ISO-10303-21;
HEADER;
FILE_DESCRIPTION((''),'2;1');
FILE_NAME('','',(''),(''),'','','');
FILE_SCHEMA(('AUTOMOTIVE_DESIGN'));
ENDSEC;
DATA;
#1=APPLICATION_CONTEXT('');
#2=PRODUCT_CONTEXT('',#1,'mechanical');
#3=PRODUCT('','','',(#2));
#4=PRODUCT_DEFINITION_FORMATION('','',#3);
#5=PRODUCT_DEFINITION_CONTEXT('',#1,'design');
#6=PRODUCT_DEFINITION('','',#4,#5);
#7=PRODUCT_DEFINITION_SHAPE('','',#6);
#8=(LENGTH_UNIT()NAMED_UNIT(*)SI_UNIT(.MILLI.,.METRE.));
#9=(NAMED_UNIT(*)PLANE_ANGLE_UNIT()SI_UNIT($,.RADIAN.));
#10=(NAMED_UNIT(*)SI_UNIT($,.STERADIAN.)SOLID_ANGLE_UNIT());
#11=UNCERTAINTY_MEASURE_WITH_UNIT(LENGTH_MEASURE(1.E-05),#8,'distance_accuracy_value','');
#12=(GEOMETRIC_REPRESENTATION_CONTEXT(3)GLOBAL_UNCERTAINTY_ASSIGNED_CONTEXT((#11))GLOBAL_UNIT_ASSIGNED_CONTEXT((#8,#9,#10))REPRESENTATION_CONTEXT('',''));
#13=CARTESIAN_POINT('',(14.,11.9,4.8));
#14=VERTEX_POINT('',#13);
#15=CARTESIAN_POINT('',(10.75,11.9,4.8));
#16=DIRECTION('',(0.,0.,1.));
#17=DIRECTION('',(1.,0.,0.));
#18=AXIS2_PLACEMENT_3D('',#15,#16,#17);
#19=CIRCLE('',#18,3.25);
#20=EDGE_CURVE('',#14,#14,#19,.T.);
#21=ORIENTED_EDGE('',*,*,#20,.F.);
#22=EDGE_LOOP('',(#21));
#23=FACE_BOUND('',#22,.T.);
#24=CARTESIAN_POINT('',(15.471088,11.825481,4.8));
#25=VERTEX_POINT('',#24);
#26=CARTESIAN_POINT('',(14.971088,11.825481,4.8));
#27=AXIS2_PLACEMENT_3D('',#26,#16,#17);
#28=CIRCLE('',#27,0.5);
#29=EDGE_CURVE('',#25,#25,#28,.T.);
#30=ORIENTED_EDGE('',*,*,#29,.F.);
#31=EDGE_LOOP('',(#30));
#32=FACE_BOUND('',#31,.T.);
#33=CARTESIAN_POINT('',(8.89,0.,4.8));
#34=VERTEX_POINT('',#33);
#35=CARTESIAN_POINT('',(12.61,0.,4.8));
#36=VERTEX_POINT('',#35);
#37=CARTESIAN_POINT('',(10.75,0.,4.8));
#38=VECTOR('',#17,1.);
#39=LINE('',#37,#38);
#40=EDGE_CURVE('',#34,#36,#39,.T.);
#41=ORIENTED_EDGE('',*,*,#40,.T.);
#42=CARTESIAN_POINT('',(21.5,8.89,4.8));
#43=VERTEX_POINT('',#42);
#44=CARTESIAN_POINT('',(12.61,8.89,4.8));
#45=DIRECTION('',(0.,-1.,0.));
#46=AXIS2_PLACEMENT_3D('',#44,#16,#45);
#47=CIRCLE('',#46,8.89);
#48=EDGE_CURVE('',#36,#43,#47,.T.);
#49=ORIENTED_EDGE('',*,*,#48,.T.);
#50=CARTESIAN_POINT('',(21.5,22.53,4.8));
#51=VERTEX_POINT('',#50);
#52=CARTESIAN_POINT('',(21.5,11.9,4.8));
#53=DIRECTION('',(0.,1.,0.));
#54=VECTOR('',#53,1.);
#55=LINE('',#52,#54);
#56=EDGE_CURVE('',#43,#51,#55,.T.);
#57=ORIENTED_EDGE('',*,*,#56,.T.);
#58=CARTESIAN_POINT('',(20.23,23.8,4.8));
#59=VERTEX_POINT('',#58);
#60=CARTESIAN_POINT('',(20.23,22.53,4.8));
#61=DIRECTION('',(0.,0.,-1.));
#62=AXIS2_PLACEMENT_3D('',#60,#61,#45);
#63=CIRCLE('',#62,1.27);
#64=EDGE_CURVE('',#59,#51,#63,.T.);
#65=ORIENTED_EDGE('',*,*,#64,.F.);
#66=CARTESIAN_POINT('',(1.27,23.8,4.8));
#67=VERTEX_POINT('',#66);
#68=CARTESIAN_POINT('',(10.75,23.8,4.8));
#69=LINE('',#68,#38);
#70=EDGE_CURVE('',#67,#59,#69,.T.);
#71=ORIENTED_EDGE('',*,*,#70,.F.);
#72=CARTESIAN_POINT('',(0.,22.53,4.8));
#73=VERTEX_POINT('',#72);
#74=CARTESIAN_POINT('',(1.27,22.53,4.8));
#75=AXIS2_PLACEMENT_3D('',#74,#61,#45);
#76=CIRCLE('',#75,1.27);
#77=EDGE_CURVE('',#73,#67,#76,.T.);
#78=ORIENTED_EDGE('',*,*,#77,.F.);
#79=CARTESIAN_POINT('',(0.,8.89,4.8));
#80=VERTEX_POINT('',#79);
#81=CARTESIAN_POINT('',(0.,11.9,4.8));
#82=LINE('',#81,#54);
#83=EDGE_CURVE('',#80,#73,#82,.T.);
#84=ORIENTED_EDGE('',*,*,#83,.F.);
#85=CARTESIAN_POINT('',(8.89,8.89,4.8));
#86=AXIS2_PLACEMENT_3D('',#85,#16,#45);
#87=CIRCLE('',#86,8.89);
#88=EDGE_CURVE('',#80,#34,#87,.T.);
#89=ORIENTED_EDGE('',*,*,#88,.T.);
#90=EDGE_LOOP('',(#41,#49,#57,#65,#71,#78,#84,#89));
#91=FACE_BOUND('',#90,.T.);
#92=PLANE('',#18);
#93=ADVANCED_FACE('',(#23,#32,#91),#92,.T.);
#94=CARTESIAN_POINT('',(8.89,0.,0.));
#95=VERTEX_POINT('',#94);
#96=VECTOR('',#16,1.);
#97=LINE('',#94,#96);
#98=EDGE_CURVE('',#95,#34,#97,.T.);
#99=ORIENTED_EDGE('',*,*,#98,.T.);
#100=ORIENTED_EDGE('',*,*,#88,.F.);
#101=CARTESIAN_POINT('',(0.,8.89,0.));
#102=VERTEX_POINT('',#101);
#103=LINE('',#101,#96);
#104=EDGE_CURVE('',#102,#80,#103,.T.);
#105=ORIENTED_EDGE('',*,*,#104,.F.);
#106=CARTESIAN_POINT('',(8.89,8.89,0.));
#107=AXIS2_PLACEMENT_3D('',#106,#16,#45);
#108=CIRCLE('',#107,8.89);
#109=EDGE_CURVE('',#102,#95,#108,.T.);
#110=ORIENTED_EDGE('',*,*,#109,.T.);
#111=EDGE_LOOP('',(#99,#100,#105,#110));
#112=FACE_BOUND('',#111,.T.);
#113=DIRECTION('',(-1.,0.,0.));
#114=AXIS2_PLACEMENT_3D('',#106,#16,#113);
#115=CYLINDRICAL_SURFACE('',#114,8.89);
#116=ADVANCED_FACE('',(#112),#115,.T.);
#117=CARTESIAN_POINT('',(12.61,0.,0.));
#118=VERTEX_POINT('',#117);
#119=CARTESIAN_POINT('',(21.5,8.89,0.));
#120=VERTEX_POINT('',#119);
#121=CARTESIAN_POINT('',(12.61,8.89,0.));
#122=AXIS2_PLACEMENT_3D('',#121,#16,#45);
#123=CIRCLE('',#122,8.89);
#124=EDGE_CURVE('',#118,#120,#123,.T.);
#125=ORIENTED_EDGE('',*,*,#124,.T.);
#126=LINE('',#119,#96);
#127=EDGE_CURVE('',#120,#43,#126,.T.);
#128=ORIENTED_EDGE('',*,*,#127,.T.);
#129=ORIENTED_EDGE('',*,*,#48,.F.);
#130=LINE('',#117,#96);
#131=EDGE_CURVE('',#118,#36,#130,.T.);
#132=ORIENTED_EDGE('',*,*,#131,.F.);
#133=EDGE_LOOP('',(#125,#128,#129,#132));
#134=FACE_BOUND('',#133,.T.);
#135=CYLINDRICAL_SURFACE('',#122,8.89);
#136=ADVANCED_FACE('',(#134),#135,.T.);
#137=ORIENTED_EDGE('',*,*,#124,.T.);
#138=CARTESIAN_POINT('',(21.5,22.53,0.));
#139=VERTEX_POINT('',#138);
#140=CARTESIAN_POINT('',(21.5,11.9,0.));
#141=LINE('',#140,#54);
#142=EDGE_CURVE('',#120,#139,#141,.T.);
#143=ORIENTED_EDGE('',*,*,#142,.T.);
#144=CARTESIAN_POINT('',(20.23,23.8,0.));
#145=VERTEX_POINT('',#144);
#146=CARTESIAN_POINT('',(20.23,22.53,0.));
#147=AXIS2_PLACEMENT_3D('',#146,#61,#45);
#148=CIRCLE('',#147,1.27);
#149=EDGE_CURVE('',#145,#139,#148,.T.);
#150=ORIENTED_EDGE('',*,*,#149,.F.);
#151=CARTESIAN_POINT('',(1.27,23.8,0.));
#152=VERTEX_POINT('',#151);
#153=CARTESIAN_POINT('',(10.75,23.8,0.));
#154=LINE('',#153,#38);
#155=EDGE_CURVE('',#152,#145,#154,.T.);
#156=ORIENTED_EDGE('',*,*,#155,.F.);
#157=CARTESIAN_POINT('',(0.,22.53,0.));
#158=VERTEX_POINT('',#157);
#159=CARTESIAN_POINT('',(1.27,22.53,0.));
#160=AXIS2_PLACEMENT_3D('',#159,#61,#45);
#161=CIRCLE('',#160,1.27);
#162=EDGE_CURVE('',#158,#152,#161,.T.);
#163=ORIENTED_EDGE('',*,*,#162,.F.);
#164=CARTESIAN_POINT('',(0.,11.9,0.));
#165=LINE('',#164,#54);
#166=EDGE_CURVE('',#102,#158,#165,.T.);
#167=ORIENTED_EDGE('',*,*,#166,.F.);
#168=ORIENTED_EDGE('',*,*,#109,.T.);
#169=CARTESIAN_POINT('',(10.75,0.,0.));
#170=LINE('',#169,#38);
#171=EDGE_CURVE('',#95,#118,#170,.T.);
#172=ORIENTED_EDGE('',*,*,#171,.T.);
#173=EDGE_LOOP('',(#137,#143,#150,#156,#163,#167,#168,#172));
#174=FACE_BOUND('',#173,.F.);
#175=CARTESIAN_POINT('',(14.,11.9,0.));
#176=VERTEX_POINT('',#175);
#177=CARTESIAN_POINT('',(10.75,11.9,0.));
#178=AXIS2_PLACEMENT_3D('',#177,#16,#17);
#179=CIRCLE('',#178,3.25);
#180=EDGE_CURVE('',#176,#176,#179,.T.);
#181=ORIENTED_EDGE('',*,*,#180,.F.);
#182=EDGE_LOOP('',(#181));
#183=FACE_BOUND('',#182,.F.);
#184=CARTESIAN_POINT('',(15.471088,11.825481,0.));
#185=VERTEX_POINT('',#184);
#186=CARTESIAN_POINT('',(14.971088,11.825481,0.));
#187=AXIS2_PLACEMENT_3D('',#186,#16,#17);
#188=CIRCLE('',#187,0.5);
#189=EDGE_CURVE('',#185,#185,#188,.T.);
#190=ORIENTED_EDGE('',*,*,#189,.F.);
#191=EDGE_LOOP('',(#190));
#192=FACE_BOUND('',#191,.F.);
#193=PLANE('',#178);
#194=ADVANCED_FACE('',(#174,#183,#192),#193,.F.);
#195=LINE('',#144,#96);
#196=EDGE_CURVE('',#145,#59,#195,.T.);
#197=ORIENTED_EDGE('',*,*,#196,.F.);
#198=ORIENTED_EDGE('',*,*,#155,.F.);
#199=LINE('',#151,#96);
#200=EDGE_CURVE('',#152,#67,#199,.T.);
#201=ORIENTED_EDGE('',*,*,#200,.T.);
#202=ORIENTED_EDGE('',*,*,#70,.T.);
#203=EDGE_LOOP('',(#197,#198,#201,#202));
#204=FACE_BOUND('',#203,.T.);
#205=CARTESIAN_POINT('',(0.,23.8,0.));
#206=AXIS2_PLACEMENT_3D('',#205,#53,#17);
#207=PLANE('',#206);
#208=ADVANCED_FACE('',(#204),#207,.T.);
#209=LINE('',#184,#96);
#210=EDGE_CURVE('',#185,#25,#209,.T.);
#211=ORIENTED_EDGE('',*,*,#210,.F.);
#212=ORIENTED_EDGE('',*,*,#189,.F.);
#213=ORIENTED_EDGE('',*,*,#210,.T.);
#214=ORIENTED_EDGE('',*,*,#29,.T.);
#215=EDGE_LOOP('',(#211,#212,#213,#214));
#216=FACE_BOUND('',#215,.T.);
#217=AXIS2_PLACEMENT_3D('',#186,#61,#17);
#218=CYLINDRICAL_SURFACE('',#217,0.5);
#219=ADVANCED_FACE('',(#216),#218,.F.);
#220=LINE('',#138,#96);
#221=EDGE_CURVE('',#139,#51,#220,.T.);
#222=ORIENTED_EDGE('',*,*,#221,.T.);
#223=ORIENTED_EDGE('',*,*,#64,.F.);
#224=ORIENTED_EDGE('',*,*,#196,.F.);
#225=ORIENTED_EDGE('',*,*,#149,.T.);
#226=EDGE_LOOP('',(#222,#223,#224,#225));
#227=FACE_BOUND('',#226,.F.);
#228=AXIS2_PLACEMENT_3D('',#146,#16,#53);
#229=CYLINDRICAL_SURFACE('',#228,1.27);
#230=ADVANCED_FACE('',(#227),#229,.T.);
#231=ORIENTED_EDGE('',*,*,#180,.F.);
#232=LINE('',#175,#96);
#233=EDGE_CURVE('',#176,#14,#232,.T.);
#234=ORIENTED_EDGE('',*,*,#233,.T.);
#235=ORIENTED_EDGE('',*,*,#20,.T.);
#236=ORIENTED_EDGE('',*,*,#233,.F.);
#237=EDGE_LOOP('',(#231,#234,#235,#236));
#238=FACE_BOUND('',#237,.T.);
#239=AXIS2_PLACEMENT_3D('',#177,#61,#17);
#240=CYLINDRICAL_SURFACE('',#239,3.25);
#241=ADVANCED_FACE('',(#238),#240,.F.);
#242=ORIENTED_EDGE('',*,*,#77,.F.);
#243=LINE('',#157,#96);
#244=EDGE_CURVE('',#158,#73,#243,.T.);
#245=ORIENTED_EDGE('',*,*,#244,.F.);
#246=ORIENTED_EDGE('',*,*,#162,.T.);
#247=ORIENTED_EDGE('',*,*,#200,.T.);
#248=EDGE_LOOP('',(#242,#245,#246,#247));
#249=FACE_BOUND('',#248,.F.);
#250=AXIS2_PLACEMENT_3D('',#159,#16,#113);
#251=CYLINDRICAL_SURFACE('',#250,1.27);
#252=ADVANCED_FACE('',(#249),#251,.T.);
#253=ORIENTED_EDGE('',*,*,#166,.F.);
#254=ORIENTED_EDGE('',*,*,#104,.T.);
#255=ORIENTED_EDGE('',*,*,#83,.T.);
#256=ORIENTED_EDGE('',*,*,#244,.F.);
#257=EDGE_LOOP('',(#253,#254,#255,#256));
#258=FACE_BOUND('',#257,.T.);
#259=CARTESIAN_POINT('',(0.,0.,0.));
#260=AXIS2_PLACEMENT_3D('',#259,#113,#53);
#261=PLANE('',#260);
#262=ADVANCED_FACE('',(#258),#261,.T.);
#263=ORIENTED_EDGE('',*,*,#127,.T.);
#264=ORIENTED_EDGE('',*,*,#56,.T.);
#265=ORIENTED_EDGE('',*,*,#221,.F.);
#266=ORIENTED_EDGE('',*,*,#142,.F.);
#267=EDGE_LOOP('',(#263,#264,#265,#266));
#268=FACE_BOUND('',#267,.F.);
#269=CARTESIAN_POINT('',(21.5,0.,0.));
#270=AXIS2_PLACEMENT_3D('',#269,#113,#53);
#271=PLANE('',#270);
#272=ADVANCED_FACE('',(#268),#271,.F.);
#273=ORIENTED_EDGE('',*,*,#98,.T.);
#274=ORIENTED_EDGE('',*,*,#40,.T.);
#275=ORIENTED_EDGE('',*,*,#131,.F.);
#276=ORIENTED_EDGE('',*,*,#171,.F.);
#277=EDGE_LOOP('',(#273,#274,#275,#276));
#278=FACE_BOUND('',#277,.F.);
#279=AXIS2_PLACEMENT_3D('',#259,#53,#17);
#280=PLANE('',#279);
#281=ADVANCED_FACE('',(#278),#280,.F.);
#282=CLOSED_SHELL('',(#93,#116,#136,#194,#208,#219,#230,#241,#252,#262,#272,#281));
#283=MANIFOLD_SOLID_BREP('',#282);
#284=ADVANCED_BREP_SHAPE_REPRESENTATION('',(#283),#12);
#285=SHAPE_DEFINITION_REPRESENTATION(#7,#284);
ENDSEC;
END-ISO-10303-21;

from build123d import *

# Parameters (mm, degrees)
F0_W     = 21.5
F0_H     = 23.8
F0_R     = 0.5
F0_R_2   = 3.25
F1_DEPTH = 4.8
F2_R     = 8.89
F3_R     = 1.27


# Not quite as in the source:
# - a feature of the source that left no trace in its solid (it failed there, or was rolled back) is left out


with BuildPart() as f1:
    # F0 (on Top) → F1 (new body)
    with BuildSketch(Plane.XY):
        with Locations((10.75, 11.9)):
            Rectangle(F0_W, F0_H)
        with Locations((14.9710876867, 11.8254814297)):
            Circle(F0_R, mode=Mode.SUBTRACT)
        with Locations((10.75, 11.9)):
            Circle(F0_R_2, mode=Mode.SUBTRACT)
    extrude(amount=F1_DEPTH)

    # F2
    f2_edges = [f1.edges().sort_by_distance(p)[0] for p in [
        (21.5, 0, 2.4),
        (0, 0, 2.4),
    ]]
    fillet(f2_edges, radius=F2_R)

    # F3
    f3_edges = [f1.edges().sort_by_distance(p)[0] for p in [
        (21.5, 23.8, 2.4),
        (0, 23.8, 2.4),
    ]]
    fillet(f3_edges, radius=F3_R)


solid = f1.part
